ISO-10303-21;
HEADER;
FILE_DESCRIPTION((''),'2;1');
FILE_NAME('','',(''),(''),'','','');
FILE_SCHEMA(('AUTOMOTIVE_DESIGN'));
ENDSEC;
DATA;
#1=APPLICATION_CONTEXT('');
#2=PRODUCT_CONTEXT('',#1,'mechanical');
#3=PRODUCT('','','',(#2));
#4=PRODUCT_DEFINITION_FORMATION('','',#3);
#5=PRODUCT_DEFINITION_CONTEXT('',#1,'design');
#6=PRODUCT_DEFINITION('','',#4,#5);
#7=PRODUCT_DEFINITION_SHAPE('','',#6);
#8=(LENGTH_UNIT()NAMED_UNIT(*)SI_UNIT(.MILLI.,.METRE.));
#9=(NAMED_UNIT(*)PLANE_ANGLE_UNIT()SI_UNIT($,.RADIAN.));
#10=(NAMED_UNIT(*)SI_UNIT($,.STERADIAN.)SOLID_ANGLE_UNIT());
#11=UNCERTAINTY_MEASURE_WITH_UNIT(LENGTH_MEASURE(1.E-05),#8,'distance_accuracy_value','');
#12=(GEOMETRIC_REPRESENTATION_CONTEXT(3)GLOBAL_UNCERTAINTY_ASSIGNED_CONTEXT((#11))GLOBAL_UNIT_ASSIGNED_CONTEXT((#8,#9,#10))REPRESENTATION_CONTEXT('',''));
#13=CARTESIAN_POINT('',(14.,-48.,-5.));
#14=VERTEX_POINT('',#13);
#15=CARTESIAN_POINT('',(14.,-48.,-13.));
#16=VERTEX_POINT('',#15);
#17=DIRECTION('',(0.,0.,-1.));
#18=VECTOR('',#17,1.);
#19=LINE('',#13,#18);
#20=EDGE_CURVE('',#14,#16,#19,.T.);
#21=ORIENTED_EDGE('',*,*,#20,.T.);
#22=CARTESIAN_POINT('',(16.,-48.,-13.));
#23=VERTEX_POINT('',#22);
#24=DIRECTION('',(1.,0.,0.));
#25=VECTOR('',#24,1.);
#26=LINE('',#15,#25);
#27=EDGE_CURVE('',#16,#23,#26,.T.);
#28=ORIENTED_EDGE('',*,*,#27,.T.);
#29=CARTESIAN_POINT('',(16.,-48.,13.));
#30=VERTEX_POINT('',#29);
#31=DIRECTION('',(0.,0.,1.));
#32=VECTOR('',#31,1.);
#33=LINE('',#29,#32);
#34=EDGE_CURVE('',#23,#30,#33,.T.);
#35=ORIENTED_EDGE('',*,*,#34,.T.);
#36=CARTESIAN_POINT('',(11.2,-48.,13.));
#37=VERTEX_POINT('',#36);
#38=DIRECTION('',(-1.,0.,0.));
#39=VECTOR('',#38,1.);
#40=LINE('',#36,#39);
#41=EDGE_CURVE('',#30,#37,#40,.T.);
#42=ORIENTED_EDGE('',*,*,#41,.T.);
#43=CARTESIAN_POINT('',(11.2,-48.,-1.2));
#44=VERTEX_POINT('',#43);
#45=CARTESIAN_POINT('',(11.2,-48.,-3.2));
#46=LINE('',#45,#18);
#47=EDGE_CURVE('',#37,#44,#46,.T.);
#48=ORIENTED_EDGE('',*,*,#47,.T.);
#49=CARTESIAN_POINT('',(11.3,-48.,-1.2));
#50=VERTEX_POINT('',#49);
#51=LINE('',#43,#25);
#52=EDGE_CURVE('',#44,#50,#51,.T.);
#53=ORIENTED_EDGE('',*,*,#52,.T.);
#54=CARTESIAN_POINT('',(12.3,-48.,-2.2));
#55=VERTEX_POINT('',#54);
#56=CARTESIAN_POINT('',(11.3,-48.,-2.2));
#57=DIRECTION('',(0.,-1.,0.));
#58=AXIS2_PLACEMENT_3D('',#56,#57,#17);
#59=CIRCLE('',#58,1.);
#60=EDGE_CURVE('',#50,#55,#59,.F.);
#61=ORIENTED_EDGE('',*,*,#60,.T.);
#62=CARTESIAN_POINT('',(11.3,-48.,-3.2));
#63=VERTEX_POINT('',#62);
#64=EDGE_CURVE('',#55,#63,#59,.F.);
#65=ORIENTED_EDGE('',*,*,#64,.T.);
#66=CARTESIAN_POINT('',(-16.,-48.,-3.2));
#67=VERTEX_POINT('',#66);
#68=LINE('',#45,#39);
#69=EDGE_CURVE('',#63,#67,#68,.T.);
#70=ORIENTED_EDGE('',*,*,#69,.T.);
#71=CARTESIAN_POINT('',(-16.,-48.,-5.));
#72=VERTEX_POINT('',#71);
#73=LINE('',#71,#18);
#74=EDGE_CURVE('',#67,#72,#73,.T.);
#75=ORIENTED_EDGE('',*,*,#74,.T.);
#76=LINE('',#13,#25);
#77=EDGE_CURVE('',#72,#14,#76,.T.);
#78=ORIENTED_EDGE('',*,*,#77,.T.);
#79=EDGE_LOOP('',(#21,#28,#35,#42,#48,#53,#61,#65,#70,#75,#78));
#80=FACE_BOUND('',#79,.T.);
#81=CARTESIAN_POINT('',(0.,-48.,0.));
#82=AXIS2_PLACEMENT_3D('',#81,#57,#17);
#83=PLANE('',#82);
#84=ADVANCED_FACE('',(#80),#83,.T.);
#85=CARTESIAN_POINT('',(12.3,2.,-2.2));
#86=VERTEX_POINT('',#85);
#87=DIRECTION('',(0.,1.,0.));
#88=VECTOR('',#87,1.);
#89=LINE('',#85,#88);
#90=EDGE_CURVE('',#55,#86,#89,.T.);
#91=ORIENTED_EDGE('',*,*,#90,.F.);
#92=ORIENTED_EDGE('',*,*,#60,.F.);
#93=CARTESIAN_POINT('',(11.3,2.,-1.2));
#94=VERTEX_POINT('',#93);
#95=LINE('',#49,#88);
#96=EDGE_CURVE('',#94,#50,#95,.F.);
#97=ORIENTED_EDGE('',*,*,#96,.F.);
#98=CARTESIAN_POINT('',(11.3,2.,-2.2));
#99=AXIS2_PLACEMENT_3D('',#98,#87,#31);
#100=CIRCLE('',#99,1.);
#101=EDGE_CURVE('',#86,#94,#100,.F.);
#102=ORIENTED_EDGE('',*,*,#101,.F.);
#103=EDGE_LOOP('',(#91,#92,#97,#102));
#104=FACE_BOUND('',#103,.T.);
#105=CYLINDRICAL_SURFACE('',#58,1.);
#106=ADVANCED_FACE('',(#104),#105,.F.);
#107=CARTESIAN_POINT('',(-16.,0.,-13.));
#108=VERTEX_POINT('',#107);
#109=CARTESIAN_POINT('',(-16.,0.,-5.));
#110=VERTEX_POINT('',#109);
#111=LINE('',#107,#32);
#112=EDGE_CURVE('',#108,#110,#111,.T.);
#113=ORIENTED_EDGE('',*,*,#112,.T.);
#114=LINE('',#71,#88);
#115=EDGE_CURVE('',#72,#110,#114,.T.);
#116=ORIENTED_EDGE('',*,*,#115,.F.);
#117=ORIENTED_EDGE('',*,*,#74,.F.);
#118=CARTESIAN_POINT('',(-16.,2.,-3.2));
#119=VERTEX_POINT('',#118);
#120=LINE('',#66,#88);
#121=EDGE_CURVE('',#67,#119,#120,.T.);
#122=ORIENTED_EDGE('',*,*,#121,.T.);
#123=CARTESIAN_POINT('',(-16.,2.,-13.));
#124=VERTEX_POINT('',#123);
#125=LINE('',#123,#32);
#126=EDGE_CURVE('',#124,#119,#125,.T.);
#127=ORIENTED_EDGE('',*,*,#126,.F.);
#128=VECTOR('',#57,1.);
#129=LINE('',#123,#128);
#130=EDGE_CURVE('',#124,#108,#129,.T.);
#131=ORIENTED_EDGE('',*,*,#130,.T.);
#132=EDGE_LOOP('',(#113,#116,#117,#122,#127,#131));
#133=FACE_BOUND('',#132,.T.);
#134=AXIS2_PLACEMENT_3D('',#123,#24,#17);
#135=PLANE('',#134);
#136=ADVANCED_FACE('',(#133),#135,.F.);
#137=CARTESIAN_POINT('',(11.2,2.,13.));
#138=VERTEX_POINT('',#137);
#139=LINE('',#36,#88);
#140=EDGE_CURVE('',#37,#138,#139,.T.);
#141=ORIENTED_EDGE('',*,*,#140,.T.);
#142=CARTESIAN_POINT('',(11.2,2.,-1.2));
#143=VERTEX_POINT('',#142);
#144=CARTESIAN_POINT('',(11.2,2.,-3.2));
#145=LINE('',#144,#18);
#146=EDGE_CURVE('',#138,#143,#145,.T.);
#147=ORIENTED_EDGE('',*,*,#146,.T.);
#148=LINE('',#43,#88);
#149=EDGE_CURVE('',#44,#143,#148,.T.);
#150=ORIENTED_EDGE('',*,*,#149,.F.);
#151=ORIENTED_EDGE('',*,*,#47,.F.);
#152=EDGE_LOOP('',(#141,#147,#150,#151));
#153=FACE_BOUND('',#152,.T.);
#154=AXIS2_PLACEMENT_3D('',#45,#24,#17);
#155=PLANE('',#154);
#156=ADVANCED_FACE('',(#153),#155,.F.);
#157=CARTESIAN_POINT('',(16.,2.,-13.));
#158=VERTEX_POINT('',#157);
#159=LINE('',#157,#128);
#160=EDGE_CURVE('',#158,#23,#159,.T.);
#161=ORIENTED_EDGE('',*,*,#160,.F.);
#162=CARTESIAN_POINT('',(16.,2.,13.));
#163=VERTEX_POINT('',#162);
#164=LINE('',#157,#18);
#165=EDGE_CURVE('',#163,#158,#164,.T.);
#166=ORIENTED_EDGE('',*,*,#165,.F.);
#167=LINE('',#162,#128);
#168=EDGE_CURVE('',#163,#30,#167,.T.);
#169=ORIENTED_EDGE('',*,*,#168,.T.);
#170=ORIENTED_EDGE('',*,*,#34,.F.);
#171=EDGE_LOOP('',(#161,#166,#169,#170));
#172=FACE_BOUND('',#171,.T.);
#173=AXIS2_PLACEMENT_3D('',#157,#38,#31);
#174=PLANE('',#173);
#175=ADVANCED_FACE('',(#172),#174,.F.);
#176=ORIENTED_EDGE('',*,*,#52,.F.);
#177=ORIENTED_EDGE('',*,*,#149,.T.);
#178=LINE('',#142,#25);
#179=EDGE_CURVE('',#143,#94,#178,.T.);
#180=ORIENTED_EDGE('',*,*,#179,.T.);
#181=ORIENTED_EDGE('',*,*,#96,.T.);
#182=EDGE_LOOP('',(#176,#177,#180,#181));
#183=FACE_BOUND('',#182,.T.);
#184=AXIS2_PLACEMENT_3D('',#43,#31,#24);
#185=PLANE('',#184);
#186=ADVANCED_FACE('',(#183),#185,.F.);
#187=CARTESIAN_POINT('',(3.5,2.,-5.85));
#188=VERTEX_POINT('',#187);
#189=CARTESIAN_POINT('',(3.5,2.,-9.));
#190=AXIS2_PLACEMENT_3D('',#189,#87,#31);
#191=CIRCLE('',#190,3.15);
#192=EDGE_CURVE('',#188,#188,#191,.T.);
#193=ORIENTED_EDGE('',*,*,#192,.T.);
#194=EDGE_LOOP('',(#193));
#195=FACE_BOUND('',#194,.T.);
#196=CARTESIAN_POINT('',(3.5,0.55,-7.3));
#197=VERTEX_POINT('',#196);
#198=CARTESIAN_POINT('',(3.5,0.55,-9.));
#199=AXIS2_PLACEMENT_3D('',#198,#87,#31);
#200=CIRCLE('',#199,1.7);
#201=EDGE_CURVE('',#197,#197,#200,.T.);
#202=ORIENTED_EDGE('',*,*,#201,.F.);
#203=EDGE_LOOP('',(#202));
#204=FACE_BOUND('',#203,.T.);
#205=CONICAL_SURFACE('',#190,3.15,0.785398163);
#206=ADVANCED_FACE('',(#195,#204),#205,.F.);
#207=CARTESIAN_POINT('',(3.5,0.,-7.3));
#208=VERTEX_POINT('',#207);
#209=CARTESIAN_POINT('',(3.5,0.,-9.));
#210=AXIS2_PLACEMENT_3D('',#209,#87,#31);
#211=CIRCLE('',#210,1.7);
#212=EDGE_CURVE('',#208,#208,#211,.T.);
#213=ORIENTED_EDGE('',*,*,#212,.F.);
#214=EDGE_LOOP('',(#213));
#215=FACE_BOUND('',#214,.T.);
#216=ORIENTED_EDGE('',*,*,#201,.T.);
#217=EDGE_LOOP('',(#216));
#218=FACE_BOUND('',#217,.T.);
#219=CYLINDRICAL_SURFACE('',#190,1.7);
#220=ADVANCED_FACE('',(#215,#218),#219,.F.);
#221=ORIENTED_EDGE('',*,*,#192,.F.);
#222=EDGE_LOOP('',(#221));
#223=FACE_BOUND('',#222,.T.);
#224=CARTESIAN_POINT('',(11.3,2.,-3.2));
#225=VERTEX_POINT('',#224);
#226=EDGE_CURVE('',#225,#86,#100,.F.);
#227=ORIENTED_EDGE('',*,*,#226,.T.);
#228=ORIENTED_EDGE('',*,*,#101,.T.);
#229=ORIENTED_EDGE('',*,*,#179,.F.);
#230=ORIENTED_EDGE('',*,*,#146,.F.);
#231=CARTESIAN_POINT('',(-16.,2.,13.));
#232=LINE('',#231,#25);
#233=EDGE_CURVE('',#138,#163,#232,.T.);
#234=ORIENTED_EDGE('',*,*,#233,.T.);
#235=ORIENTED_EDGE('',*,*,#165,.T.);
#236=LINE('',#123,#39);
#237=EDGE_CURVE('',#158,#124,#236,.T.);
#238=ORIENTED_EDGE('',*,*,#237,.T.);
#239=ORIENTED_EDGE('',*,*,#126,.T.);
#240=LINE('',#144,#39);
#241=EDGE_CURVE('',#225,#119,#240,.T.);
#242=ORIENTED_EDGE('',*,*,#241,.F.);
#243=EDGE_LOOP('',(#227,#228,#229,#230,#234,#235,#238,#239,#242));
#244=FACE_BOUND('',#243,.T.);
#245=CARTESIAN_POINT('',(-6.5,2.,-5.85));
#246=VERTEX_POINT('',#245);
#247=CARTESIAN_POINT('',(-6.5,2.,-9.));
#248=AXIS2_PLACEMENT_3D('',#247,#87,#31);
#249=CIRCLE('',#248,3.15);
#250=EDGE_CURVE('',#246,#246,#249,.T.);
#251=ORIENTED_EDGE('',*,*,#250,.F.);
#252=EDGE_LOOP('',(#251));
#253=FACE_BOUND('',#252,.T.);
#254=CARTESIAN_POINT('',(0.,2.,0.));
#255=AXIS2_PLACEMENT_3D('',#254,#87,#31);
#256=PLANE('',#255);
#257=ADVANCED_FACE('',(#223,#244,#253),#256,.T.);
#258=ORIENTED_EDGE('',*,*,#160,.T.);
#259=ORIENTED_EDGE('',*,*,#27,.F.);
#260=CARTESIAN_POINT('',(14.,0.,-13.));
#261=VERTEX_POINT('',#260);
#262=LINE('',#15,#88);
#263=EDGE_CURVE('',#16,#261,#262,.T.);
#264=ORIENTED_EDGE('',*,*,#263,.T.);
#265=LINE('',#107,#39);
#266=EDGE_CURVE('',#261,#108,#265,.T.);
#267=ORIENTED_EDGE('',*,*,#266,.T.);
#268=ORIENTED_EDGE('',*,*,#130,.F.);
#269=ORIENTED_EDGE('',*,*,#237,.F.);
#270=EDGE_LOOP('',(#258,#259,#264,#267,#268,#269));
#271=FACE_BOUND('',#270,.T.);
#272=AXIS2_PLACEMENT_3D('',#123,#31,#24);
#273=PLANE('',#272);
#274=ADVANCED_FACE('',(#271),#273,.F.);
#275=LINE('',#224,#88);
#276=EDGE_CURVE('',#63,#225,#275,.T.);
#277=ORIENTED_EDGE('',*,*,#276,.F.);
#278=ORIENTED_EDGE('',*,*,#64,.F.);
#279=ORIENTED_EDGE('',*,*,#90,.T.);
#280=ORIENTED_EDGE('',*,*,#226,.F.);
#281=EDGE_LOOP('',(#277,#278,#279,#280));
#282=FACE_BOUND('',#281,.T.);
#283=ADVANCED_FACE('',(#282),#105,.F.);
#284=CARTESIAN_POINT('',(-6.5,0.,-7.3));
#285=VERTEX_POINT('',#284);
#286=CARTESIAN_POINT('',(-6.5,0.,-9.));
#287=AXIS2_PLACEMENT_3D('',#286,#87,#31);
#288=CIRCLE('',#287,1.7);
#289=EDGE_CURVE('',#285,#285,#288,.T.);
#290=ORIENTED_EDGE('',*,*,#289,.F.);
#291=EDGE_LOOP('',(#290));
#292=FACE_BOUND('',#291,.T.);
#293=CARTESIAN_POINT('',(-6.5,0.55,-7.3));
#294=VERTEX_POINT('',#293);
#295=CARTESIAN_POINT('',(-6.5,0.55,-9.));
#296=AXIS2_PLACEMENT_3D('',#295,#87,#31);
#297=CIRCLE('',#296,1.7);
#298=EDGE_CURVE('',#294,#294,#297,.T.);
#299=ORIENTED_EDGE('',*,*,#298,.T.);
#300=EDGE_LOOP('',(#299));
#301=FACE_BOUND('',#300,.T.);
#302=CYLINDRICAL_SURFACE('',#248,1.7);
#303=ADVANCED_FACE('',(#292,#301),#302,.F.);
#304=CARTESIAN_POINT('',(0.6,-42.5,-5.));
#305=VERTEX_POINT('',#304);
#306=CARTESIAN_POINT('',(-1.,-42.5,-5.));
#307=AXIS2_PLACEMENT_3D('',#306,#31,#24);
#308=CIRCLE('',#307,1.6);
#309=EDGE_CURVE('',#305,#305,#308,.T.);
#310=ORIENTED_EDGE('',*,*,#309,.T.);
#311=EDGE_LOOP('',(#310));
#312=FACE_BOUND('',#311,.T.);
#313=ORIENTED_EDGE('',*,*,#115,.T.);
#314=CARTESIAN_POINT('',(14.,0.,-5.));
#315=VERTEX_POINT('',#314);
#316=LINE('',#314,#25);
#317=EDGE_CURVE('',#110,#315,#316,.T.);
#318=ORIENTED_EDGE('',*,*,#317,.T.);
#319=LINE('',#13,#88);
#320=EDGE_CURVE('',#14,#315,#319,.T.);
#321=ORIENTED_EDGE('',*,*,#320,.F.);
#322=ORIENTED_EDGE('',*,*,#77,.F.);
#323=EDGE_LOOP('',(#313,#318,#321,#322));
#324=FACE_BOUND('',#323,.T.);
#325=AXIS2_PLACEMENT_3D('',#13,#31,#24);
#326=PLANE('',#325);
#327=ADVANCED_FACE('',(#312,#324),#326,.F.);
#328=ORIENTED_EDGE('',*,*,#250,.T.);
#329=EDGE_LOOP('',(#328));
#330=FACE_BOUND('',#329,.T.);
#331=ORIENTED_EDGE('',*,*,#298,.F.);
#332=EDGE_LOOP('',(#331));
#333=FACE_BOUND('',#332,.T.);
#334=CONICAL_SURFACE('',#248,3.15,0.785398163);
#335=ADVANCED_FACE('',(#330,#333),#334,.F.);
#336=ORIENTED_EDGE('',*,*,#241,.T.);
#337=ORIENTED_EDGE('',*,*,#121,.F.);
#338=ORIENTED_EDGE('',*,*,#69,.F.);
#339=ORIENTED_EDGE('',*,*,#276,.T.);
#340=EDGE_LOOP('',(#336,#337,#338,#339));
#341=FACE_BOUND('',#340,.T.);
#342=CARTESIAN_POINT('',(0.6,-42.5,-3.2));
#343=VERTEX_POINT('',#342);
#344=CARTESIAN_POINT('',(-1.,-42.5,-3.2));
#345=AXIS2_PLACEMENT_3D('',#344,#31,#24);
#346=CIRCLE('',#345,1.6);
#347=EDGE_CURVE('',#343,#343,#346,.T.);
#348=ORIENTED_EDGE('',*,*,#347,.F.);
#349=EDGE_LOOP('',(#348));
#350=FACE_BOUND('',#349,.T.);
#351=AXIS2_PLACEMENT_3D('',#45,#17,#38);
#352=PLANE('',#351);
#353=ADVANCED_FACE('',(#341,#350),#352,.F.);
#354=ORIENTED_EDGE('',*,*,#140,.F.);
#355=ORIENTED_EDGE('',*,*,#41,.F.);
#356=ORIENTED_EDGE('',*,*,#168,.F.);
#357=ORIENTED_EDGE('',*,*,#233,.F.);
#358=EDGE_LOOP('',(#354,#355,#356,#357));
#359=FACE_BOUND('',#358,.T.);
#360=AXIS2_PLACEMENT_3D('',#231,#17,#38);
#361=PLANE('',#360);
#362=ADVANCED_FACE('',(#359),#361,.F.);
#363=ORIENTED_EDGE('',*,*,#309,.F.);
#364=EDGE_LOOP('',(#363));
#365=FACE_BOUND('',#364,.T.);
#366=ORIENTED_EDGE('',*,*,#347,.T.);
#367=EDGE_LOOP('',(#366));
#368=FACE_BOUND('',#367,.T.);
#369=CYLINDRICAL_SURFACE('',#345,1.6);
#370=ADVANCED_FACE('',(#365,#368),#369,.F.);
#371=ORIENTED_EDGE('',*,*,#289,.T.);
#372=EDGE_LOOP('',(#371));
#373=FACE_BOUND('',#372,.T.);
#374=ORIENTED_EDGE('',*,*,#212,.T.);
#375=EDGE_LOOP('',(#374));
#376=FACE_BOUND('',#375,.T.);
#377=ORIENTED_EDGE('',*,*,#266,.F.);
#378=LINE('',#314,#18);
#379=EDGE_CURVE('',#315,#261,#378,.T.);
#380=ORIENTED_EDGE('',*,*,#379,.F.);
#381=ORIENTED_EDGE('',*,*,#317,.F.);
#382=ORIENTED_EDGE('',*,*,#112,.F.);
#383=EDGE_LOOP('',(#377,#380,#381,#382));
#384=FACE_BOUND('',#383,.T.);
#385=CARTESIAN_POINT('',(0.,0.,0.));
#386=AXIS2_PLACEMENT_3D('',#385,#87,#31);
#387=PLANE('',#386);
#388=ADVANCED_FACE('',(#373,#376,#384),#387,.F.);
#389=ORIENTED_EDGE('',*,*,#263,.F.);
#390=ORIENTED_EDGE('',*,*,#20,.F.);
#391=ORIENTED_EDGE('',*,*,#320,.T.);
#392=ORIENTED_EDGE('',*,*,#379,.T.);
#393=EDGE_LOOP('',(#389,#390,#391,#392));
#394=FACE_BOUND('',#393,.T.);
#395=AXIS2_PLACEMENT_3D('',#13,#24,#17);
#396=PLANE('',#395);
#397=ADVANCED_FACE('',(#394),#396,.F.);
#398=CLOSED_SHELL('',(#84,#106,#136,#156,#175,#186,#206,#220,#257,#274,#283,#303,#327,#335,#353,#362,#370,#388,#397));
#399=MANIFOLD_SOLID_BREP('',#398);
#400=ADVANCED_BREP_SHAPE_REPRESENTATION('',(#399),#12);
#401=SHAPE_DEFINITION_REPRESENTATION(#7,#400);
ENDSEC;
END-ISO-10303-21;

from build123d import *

# Parameters (mm, degrees)
SKIZZE1_W                                            = 32
SKIZZE1_H                                            = 26
AUFSATZ_LINEAR_AUSTRAGEN1_DEPTH                      = 2
FORMSENKUNG_F_R_M3_LINSENSENKSCHRAUBE_MI_D           = 3.4
FORMSENKUNG_F_R_M3_LINSENSENKSCHRAUBE_MI_DEPTH       = 8.5
FORMSENKUNG_F_R_M3_LINSENSENKSCHRAUBE_MI_CSINK_D     = 6.3
FORMSENKUNG_F_R_M3_LINSENSENKSCHRAUBE_MI_CSINK_ANGLE = 90
FORMSENKUNG_F_R_M3_LINSENSENKSCHRAUBE_MI_TIP         = 1.021463052
AUFSATZ_LINEAR_AUSTRAGEN2_DEPTH                      = 48
SKIZZE12_W                                           = 27.2
SKIZZE12_H                                           = 16.2
SCHNITT_LINEAR_AUSTRAGEN3_DEPTH                      = 55.083269132
F_3_2_3_2_DURCHMESSER_BOHRUNG1_D                     = 3.2
SKIZZE16_W                                           = 1.1
SKIZZE16_H                                           = 2
SCHNITT_LINEAR_AUSTRAGEN5_DEPTH                      = 55.083269132
VERRUNDUNG1_R                                        = 1


with BuildPart() as part:
    # Skizze1 → Aufsatz-Linear austragen1 (new body)
    with BuildSketch(Plane(origin=(0, 0, 0), x_dir=(1, 0, 0), z_dir=(0, 1, 0))):
        Rectangle(SKIZZE1_W, SKIZZE1_H)
    extrude(amount=AUFSATZ_LINEAR_AUSTRAGEN1_DEPTH)

    # Formsenkung für M3 Linsensenkschraube mit Schlitz1
    with Locations(Plane(origin=(0, 2, 0), x_dir=(1, 0, 0), z_dir=(0, 1, 0))):
        with Locations((-6.5, 9), (3.5, 9)):
            CounterSinkHole(FORMSENKUNG_F_R_M3_LINSENSENKSCHRAUBE_MI_D / 2, FORMSENKUNG_F_R_M3_LINSENSENKSCHRAUBE_MI_CSINK_D / 2, depth=FORMSENKUNG_F_R_M3_LINSENSENKSCHRAUBE_MI_DEPTH, counter_sink_angle=FORMSENKUNG_F_R_M3_LINSENSENKSCHRAUBE_MI_CSINK_ANGLE)
            with Locations((0, 0, -(FORMSENKUNG_F_R_M3_LINSENSENKSCHRAUBE_MI_DEPTH + FORMSENKUNG_F_R_M3_LINSENSENKSCHRAUBE_MI_TIP / 2))):  # 118° drill point
                Cone(0, FORMSENKUNG_F_R_M3_LINSENSENKSCHRAUBE_MI_D / 2, FORMSENKUNG_F_R_M3_LINSENSENKSCHRAUBE_MI_TIP, mode=Mode.SUBTRACT)

    # Skizze11 → Aufsatz-Linear austragen2 (add)
    with BuildSketch(Plane.XZ):
        Polygon((16, 13), (16, -13), (14, -13), (14, -5), (-16, -5), (-16, -3.2), (11.2, -3.2), (11.2, 13), align=None)
    extrude(amount=AUFSATZ_LINEAR_AUSTRAGEN2_DEPTH)

    # Skizze12 → Schnitt-Linear austragen3 (cut, through all)
    with BuildSketch(Plane(origin=(0, 2, 0), x_dir=(1, 0, 0), z_dir=(0, 1, 0))):
        with Locations((-2.4, -4.9)):
            Rectangle(SKIZZE12_W, SKIZZE12_H)
    extrude(amount=-SCHNITT_LINEAR_AUSTRAGEN3_DEPTH, mode=Mode.SUBTRACT)

    # Ø3.2 (3.2) Durchmesser Bohrung1 (through all)
    with Locations(Plane.XY.offset(-3.2)):
        with Locations((-1, -42.5)):
            Hole(F_3_2_3_2_DURCHMESSER_BOHRUNG1_D / 2)

    # Skizze16 → Schnitt-Linear austragen5 (cut, through all)
    with BuildSketch(Plane(origin=(0, 2, 0), x_dir=(1, 0, 0), z_dir=(0, 1, 0))):
        with Locations((11.75, 2.2)):
            Rectangle(SKIZZE16_W, SKIZZE16_H)
    extrude(amount=-SCHNITT_LINEAR_AUSTRAGEN5_DEPTH, mode=Mode.SUBTRACT)

    # Verrundung1
    verrundung1_edges = [part.edges().sort_by_distance(p)[0] for p in [
        (12.3, -23, -3.2),
        (12.3, -23, -1.2),
    ]]
    fillet(verrundung1_edges, radius=VERRUNDUNG1_R - 0.0001)  # a hair under: the kernel refuses the full size


solid = part.part
